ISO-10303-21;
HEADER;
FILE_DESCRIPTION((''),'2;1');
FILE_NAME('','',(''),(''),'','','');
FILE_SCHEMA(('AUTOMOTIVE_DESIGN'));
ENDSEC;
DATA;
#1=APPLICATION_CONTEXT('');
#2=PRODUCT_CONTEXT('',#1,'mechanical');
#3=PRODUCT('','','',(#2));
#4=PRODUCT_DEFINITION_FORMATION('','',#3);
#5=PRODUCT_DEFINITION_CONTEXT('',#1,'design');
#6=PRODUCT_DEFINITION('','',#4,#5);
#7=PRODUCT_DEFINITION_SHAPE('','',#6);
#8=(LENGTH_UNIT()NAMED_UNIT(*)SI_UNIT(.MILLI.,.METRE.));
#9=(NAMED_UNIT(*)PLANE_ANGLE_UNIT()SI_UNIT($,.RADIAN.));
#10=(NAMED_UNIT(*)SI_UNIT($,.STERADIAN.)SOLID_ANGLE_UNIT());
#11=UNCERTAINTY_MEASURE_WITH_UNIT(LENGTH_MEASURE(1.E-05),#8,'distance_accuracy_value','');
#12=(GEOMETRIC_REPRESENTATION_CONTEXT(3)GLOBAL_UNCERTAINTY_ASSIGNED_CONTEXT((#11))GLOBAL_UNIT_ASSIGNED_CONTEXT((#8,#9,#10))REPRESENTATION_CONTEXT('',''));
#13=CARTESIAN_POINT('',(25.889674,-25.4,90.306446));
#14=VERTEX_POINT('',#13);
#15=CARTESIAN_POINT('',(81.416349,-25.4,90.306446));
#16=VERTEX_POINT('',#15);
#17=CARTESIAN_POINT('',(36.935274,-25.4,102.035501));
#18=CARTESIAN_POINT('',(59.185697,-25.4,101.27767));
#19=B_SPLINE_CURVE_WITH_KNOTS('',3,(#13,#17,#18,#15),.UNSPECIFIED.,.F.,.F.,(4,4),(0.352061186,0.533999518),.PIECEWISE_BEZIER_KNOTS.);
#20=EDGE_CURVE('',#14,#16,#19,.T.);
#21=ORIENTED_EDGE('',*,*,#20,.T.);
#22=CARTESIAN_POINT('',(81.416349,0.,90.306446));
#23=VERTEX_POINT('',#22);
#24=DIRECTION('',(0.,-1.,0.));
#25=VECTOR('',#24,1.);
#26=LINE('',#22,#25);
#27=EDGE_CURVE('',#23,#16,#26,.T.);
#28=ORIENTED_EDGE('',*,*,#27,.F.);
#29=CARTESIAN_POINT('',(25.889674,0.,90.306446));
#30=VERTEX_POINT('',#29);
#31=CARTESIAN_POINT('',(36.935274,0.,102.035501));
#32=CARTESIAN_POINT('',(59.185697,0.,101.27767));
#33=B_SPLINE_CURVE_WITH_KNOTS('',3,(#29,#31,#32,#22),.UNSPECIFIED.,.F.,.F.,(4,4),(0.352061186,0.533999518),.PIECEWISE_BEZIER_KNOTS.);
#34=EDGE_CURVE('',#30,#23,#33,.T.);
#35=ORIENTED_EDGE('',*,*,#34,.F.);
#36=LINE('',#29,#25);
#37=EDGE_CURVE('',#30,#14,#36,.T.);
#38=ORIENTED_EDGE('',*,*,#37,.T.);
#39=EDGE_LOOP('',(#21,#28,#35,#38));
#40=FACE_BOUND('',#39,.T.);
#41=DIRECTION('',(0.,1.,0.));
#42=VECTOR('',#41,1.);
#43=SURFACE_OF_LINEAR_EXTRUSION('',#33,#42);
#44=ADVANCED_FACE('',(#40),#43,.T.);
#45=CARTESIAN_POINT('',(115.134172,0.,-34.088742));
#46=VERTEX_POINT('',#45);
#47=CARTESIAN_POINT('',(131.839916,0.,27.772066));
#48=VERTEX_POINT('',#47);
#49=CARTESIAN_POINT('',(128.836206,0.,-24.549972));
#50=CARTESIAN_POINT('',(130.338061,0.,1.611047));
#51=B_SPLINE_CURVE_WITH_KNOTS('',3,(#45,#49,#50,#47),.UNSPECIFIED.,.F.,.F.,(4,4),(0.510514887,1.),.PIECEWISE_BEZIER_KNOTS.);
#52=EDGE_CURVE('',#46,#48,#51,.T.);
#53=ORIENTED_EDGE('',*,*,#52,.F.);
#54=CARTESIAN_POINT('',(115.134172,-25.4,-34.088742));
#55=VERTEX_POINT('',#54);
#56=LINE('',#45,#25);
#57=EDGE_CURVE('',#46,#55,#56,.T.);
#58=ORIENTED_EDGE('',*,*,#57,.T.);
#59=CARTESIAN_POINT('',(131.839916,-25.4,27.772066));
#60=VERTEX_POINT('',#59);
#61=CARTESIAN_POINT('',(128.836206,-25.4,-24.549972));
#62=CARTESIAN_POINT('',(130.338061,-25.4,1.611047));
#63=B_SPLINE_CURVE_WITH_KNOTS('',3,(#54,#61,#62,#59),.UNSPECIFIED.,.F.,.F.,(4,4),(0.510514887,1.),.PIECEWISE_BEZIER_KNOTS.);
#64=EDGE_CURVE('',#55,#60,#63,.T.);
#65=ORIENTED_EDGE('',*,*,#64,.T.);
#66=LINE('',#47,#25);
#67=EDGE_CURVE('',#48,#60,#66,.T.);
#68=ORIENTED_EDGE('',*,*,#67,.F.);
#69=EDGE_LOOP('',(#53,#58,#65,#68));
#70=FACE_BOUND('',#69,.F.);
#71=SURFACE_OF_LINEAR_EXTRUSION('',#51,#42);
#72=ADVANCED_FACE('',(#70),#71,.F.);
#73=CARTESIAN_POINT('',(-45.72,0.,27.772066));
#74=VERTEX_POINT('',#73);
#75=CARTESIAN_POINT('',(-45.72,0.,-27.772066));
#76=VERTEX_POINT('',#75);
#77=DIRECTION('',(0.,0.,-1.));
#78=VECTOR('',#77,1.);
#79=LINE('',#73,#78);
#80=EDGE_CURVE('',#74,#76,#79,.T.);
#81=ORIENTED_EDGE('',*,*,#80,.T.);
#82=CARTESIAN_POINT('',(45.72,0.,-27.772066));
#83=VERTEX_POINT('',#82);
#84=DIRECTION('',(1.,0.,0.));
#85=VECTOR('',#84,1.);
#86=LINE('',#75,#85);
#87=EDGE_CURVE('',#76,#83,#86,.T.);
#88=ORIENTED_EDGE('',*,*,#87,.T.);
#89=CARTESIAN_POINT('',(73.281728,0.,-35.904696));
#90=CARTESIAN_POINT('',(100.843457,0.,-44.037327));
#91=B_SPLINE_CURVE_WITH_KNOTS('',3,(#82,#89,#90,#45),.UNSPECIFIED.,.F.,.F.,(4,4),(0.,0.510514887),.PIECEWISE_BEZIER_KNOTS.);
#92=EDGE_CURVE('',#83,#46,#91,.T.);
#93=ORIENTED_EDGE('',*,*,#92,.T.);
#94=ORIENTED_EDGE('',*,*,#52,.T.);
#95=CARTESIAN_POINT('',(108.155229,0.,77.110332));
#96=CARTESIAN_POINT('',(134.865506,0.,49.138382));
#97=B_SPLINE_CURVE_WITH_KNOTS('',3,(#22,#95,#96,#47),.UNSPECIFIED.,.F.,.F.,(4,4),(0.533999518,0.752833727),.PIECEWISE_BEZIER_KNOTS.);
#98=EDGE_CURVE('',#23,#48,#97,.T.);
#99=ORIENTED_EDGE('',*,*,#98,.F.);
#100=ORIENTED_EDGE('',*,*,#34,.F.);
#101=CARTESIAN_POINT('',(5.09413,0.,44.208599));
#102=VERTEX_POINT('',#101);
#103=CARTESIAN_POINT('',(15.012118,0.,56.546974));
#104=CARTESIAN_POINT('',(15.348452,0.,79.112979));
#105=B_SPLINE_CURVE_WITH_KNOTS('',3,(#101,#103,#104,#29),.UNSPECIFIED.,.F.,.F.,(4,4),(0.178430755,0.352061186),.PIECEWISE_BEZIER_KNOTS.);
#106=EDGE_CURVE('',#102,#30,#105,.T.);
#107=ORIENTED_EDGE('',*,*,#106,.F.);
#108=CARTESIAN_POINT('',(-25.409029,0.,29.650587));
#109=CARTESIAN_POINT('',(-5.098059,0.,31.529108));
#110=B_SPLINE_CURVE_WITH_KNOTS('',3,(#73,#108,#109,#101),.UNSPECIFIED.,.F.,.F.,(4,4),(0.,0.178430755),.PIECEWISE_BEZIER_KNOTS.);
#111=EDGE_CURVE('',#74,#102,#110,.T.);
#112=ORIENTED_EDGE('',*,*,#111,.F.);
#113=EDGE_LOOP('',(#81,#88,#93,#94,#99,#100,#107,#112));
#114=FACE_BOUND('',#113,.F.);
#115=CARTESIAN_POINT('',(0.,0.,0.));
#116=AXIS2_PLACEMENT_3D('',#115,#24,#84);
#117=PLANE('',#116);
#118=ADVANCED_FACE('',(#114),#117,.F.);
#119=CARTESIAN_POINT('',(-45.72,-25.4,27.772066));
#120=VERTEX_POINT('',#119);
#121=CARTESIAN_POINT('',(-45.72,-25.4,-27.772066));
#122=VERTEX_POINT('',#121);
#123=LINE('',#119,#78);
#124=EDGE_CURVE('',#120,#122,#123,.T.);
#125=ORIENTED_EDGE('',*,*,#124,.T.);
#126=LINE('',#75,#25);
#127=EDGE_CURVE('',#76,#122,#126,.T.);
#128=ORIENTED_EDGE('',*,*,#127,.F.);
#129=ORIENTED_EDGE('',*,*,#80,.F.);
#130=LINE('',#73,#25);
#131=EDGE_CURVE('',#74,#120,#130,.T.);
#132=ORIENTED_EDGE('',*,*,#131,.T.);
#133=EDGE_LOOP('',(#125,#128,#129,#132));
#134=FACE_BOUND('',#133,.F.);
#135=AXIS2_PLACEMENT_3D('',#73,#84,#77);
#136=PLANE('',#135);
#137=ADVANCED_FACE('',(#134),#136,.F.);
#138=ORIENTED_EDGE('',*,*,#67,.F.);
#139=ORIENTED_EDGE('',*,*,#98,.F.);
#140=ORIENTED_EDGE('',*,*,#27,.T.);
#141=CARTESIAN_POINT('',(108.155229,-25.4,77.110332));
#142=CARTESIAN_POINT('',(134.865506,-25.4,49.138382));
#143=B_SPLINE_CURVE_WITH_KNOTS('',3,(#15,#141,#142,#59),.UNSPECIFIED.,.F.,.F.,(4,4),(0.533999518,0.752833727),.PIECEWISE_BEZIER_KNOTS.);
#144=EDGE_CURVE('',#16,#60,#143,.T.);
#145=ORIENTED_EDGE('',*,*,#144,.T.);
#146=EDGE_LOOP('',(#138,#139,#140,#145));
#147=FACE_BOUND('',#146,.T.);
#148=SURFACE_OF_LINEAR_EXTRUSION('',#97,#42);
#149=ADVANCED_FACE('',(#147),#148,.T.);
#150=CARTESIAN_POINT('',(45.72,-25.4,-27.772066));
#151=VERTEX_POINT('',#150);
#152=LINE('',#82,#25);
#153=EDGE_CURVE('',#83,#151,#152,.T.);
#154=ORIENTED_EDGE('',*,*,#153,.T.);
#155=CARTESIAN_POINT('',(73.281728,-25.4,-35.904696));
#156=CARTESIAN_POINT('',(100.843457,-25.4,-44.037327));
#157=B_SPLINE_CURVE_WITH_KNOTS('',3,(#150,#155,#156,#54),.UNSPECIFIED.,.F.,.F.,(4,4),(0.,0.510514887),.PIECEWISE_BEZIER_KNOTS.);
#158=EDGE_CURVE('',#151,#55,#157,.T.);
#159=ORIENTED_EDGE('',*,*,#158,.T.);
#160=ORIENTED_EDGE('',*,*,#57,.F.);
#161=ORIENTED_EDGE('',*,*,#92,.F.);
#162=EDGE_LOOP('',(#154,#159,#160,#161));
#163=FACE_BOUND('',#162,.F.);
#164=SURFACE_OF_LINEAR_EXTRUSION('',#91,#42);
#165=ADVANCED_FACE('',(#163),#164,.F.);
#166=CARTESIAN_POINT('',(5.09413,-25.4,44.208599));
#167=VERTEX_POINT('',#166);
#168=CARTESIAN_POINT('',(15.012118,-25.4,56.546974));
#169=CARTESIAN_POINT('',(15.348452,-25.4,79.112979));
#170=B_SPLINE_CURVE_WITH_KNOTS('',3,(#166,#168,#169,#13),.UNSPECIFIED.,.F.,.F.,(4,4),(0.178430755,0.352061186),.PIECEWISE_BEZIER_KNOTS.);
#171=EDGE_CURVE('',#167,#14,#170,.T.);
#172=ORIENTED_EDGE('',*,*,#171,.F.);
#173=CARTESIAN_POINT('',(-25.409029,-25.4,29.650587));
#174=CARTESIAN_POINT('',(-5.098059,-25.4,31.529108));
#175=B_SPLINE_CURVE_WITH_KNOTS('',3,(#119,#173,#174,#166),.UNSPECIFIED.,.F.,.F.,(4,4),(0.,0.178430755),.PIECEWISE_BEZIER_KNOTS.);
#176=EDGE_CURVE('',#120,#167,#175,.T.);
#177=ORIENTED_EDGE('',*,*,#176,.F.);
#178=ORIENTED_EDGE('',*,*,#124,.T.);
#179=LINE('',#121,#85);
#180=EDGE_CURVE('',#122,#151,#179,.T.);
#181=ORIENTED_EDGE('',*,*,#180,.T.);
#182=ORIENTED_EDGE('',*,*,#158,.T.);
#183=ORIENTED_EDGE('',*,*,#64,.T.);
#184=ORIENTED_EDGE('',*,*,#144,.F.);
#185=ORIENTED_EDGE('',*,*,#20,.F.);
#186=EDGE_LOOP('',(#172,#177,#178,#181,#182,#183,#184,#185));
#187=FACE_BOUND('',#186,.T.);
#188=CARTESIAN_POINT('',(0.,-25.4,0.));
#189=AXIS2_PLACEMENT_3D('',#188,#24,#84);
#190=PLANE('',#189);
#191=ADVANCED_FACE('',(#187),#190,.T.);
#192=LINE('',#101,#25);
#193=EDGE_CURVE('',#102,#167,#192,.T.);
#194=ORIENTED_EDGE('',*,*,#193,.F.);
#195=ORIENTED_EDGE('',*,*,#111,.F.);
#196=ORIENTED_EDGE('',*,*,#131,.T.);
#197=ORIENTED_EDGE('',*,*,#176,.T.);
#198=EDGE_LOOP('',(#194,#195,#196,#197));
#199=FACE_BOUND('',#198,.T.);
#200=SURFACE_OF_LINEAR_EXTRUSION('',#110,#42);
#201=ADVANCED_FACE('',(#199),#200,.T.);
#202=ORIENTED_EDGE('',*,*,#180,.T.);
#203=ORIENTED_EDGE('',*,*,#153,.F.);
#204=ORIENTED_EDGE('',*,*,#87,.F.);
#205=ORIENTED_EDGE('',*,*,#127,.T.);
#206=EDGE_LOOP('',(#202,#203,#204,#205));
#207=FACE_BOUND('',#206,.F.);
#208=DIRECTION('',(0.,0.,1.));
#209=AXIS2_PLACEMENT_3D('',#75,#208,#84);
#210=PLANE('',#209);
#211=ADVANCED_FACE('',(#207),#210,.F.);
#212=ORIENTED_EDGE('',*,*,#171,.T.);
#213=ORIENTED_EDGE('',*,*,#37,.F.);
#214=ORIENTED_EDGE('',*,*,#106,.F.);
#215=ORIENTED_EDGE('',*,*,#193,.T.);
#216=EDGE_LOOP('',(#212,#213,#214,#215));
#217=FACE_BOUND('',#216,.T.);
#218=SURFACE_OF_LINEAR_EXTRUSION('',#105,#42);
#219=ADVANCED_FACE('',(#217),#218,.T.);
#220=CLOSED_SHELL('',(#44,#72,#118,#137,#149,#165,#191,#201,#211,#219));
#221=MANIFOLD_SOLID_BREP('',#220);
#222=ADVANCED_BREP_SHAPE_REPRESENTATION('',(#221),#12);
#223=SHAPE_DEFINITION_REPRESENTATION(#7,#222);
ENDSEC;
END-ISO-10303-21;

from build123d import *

# Parameters (mm, degrees)
F0_W     = 55.5266755181
F0_H     = 46.0978470142
F1_DEPTH = 25.4


with BuildPart() as f1:
    # F0 (on Front) → F1 (new body)
    with BuildSketch(Plane.XZ):
        Polygon((-45.72, 27.7720657421), (-45.72, -27.7720657421), (45.72, -27.7720657421), (45.72, 2.3720657421), (45.72, 27.7720657421), align=None)
        with BuildLine():
            Line((45.72, 2.3720657421), (45.72, -27.7720657421))
            add(Edge.make_bspline(
                [(131.83991611, 27.7720657421), (128.4226083131, 3.6394915706), (87.0713041565, -12.0662870858), (45.72, -27.7720657421)],
                knots=[0.7528337274, 0.7528337274, 0.7528337274, 0.7528337274, 1, 1, 1, 1], degree=3))
            add(Edge.make_bspline(
                [(81.4163490426, 90.3064464871), (108.1552290461, 77.110332117), (134.8655063082, 49.1383822136), (131.83991611, 27.7720657421)],
                knots=[0.5339995176, 0.5339995176, 0.5339995176, 0.5339995176, 0.7528337274, 0.7528337274, 0.7528337274, 0.7528337274], degree=3))
            Line((81.4163490426, 90.3064464871), (104.9052251901, 53.874658511))
            ThreePointArc((104.9052251901, 53.874658511), (101.4010974206, 18.9161297578), (70.4063948109, 2.3720657421))
            Line((70.4063948109, 2.3720657421), (45.72, 2.3720657421))
        make_face()
        with BuildLine():
            add(Edge.make_bspline(
                [(131.83991611, 27.7720657421), (128.4226083131, 3.6394915706), (87.0713041565, -12.0662870858), (45.72, -27.7720657421)],
                knots=[0.7528337274, 0.7528337274, 0.7528337274, 0.7528337274, 1, 1, 1, 1], degree=3))
            add(Edge.make_bspline(
                [(45.72, -27.7720657421), (73.2817283043, -35.9046962959), (100.8434566087, -44.0373268496), (115.1341721416, -34.0887419879)],
                knots=[0, 0, 0, 0, 0.5105148873, 0.5105148873, 0.5105148873, 0.5105148873], degree=3))
            add(Edge.make_bspline(
                [(115.1341721416, -34.0887419879), (128.8362064561, -24.5499718093), (130.3380612831, 1.6110469664), (131.83991611, 27.7720657421)],
                knots=[0.5105148873, 0.5105148873, 0.5105148873, 0.5105148873, 1, 1, 1, 1], degree=3))
        make_face()
        with BuildLine():
            add(Edge.make_bspline(
                [(-45.72, 27.7720657421), (-25.4090292575, 29.6505869851), (-5.0980585151, 31.5291082281), (5.0941300286, 44.2085994729)],
                knots=[0, 0, 0, 0, 0.1784307554, 0.1784307554, 0.1784307554, 0.1784307554], degree=3))
            Line((-45.72, 27.7720657421), (45.72, 27.7720657421))
            Line((45.72, 27.7720657421), (70.4063948109, 27.7720657421))
            ThreePointArc((70.4063948109, 27.7720657421), (80.2980419597, 33.0519371353), (81.4163490426, 44.2085994729))
            Line((81.4163490426, 44.2085994729), (25.8896735245, 44.2085994729))
            Line((25.8896735245, 44.2085994729), (5.0941300286, 44.2085994729))
        make_face()
        with BuildLine():
            Line((45.72, 27.7720657421), (45.72, 2.3720657421))
            Line((45.72, 2.3720657421), (70.4063948109, 2.3720657421))
            ThreePointArc((70.4063948109, 2.3720657421), (101.4010974206, 18.9161297578), (104.9052251901, 53.874658511))
            Line((104.9052251901, 53.874658511), (81.4163490426, 44.2085994729))
            ThreePointArc((81.4163490426, 44.2085994729), (80.2980419597, 33.0519371353), (70.4063948109, 27.7720657421))
            Line((70.4063948109, 27.7720657421), (45.72, 27.7720657421))
        make_face()
        with BuildLine():
            add(Edge.make_bspline(
                [(5.0941300286, 44.2085994729), (15.012118023, 56.5469742394), (15.3484515231, 79.1129792412), (25.8896735245, 90.3064464871)],
                knots=[0.1784307554, 0.1784307554, 0.1784307554, 0.1784307554, 0.3520611864, 0.3520611864, 0.3520611864, 0.3520611864], degree=3))
            Line((5.0941300286, 44.2085994729), (25.8896735245, 44.2085994729))
            Line((25.8896735245, 44.2085994729), (25.8896735245, 90.3064464871))
        make_face()
        with Locations((53.6530112836, 67.25752298)):
            Rectangle(F0_W, F0_H)
        Polygon((104.9052251901, 53.874658511), (81.4163490426, 90.3064464871), (81.4163490426, 44.2085994729), align=None)
        with BuildLine():
            Line((25.8896735245, 90.3064464871), (81.4163490426, 90.3064464871))
            add(Edge.make_bspline(
                [(25.8896735245, 90.3064464871), (36.9352738157, 102.0355007707), (59.185696861, 101.2776699891), (81.4163490426, 90.3064464871)],
                knots=[0.3520611864, 0.3520611864, 0.3520611864, 0.3520611864, 0.5339995176, 0.5339995176, 0.5339995176, 0.5339995176], degree=3))
        make_face()
    extrude(amount=F1_DEPTH)


solid = f1.part
